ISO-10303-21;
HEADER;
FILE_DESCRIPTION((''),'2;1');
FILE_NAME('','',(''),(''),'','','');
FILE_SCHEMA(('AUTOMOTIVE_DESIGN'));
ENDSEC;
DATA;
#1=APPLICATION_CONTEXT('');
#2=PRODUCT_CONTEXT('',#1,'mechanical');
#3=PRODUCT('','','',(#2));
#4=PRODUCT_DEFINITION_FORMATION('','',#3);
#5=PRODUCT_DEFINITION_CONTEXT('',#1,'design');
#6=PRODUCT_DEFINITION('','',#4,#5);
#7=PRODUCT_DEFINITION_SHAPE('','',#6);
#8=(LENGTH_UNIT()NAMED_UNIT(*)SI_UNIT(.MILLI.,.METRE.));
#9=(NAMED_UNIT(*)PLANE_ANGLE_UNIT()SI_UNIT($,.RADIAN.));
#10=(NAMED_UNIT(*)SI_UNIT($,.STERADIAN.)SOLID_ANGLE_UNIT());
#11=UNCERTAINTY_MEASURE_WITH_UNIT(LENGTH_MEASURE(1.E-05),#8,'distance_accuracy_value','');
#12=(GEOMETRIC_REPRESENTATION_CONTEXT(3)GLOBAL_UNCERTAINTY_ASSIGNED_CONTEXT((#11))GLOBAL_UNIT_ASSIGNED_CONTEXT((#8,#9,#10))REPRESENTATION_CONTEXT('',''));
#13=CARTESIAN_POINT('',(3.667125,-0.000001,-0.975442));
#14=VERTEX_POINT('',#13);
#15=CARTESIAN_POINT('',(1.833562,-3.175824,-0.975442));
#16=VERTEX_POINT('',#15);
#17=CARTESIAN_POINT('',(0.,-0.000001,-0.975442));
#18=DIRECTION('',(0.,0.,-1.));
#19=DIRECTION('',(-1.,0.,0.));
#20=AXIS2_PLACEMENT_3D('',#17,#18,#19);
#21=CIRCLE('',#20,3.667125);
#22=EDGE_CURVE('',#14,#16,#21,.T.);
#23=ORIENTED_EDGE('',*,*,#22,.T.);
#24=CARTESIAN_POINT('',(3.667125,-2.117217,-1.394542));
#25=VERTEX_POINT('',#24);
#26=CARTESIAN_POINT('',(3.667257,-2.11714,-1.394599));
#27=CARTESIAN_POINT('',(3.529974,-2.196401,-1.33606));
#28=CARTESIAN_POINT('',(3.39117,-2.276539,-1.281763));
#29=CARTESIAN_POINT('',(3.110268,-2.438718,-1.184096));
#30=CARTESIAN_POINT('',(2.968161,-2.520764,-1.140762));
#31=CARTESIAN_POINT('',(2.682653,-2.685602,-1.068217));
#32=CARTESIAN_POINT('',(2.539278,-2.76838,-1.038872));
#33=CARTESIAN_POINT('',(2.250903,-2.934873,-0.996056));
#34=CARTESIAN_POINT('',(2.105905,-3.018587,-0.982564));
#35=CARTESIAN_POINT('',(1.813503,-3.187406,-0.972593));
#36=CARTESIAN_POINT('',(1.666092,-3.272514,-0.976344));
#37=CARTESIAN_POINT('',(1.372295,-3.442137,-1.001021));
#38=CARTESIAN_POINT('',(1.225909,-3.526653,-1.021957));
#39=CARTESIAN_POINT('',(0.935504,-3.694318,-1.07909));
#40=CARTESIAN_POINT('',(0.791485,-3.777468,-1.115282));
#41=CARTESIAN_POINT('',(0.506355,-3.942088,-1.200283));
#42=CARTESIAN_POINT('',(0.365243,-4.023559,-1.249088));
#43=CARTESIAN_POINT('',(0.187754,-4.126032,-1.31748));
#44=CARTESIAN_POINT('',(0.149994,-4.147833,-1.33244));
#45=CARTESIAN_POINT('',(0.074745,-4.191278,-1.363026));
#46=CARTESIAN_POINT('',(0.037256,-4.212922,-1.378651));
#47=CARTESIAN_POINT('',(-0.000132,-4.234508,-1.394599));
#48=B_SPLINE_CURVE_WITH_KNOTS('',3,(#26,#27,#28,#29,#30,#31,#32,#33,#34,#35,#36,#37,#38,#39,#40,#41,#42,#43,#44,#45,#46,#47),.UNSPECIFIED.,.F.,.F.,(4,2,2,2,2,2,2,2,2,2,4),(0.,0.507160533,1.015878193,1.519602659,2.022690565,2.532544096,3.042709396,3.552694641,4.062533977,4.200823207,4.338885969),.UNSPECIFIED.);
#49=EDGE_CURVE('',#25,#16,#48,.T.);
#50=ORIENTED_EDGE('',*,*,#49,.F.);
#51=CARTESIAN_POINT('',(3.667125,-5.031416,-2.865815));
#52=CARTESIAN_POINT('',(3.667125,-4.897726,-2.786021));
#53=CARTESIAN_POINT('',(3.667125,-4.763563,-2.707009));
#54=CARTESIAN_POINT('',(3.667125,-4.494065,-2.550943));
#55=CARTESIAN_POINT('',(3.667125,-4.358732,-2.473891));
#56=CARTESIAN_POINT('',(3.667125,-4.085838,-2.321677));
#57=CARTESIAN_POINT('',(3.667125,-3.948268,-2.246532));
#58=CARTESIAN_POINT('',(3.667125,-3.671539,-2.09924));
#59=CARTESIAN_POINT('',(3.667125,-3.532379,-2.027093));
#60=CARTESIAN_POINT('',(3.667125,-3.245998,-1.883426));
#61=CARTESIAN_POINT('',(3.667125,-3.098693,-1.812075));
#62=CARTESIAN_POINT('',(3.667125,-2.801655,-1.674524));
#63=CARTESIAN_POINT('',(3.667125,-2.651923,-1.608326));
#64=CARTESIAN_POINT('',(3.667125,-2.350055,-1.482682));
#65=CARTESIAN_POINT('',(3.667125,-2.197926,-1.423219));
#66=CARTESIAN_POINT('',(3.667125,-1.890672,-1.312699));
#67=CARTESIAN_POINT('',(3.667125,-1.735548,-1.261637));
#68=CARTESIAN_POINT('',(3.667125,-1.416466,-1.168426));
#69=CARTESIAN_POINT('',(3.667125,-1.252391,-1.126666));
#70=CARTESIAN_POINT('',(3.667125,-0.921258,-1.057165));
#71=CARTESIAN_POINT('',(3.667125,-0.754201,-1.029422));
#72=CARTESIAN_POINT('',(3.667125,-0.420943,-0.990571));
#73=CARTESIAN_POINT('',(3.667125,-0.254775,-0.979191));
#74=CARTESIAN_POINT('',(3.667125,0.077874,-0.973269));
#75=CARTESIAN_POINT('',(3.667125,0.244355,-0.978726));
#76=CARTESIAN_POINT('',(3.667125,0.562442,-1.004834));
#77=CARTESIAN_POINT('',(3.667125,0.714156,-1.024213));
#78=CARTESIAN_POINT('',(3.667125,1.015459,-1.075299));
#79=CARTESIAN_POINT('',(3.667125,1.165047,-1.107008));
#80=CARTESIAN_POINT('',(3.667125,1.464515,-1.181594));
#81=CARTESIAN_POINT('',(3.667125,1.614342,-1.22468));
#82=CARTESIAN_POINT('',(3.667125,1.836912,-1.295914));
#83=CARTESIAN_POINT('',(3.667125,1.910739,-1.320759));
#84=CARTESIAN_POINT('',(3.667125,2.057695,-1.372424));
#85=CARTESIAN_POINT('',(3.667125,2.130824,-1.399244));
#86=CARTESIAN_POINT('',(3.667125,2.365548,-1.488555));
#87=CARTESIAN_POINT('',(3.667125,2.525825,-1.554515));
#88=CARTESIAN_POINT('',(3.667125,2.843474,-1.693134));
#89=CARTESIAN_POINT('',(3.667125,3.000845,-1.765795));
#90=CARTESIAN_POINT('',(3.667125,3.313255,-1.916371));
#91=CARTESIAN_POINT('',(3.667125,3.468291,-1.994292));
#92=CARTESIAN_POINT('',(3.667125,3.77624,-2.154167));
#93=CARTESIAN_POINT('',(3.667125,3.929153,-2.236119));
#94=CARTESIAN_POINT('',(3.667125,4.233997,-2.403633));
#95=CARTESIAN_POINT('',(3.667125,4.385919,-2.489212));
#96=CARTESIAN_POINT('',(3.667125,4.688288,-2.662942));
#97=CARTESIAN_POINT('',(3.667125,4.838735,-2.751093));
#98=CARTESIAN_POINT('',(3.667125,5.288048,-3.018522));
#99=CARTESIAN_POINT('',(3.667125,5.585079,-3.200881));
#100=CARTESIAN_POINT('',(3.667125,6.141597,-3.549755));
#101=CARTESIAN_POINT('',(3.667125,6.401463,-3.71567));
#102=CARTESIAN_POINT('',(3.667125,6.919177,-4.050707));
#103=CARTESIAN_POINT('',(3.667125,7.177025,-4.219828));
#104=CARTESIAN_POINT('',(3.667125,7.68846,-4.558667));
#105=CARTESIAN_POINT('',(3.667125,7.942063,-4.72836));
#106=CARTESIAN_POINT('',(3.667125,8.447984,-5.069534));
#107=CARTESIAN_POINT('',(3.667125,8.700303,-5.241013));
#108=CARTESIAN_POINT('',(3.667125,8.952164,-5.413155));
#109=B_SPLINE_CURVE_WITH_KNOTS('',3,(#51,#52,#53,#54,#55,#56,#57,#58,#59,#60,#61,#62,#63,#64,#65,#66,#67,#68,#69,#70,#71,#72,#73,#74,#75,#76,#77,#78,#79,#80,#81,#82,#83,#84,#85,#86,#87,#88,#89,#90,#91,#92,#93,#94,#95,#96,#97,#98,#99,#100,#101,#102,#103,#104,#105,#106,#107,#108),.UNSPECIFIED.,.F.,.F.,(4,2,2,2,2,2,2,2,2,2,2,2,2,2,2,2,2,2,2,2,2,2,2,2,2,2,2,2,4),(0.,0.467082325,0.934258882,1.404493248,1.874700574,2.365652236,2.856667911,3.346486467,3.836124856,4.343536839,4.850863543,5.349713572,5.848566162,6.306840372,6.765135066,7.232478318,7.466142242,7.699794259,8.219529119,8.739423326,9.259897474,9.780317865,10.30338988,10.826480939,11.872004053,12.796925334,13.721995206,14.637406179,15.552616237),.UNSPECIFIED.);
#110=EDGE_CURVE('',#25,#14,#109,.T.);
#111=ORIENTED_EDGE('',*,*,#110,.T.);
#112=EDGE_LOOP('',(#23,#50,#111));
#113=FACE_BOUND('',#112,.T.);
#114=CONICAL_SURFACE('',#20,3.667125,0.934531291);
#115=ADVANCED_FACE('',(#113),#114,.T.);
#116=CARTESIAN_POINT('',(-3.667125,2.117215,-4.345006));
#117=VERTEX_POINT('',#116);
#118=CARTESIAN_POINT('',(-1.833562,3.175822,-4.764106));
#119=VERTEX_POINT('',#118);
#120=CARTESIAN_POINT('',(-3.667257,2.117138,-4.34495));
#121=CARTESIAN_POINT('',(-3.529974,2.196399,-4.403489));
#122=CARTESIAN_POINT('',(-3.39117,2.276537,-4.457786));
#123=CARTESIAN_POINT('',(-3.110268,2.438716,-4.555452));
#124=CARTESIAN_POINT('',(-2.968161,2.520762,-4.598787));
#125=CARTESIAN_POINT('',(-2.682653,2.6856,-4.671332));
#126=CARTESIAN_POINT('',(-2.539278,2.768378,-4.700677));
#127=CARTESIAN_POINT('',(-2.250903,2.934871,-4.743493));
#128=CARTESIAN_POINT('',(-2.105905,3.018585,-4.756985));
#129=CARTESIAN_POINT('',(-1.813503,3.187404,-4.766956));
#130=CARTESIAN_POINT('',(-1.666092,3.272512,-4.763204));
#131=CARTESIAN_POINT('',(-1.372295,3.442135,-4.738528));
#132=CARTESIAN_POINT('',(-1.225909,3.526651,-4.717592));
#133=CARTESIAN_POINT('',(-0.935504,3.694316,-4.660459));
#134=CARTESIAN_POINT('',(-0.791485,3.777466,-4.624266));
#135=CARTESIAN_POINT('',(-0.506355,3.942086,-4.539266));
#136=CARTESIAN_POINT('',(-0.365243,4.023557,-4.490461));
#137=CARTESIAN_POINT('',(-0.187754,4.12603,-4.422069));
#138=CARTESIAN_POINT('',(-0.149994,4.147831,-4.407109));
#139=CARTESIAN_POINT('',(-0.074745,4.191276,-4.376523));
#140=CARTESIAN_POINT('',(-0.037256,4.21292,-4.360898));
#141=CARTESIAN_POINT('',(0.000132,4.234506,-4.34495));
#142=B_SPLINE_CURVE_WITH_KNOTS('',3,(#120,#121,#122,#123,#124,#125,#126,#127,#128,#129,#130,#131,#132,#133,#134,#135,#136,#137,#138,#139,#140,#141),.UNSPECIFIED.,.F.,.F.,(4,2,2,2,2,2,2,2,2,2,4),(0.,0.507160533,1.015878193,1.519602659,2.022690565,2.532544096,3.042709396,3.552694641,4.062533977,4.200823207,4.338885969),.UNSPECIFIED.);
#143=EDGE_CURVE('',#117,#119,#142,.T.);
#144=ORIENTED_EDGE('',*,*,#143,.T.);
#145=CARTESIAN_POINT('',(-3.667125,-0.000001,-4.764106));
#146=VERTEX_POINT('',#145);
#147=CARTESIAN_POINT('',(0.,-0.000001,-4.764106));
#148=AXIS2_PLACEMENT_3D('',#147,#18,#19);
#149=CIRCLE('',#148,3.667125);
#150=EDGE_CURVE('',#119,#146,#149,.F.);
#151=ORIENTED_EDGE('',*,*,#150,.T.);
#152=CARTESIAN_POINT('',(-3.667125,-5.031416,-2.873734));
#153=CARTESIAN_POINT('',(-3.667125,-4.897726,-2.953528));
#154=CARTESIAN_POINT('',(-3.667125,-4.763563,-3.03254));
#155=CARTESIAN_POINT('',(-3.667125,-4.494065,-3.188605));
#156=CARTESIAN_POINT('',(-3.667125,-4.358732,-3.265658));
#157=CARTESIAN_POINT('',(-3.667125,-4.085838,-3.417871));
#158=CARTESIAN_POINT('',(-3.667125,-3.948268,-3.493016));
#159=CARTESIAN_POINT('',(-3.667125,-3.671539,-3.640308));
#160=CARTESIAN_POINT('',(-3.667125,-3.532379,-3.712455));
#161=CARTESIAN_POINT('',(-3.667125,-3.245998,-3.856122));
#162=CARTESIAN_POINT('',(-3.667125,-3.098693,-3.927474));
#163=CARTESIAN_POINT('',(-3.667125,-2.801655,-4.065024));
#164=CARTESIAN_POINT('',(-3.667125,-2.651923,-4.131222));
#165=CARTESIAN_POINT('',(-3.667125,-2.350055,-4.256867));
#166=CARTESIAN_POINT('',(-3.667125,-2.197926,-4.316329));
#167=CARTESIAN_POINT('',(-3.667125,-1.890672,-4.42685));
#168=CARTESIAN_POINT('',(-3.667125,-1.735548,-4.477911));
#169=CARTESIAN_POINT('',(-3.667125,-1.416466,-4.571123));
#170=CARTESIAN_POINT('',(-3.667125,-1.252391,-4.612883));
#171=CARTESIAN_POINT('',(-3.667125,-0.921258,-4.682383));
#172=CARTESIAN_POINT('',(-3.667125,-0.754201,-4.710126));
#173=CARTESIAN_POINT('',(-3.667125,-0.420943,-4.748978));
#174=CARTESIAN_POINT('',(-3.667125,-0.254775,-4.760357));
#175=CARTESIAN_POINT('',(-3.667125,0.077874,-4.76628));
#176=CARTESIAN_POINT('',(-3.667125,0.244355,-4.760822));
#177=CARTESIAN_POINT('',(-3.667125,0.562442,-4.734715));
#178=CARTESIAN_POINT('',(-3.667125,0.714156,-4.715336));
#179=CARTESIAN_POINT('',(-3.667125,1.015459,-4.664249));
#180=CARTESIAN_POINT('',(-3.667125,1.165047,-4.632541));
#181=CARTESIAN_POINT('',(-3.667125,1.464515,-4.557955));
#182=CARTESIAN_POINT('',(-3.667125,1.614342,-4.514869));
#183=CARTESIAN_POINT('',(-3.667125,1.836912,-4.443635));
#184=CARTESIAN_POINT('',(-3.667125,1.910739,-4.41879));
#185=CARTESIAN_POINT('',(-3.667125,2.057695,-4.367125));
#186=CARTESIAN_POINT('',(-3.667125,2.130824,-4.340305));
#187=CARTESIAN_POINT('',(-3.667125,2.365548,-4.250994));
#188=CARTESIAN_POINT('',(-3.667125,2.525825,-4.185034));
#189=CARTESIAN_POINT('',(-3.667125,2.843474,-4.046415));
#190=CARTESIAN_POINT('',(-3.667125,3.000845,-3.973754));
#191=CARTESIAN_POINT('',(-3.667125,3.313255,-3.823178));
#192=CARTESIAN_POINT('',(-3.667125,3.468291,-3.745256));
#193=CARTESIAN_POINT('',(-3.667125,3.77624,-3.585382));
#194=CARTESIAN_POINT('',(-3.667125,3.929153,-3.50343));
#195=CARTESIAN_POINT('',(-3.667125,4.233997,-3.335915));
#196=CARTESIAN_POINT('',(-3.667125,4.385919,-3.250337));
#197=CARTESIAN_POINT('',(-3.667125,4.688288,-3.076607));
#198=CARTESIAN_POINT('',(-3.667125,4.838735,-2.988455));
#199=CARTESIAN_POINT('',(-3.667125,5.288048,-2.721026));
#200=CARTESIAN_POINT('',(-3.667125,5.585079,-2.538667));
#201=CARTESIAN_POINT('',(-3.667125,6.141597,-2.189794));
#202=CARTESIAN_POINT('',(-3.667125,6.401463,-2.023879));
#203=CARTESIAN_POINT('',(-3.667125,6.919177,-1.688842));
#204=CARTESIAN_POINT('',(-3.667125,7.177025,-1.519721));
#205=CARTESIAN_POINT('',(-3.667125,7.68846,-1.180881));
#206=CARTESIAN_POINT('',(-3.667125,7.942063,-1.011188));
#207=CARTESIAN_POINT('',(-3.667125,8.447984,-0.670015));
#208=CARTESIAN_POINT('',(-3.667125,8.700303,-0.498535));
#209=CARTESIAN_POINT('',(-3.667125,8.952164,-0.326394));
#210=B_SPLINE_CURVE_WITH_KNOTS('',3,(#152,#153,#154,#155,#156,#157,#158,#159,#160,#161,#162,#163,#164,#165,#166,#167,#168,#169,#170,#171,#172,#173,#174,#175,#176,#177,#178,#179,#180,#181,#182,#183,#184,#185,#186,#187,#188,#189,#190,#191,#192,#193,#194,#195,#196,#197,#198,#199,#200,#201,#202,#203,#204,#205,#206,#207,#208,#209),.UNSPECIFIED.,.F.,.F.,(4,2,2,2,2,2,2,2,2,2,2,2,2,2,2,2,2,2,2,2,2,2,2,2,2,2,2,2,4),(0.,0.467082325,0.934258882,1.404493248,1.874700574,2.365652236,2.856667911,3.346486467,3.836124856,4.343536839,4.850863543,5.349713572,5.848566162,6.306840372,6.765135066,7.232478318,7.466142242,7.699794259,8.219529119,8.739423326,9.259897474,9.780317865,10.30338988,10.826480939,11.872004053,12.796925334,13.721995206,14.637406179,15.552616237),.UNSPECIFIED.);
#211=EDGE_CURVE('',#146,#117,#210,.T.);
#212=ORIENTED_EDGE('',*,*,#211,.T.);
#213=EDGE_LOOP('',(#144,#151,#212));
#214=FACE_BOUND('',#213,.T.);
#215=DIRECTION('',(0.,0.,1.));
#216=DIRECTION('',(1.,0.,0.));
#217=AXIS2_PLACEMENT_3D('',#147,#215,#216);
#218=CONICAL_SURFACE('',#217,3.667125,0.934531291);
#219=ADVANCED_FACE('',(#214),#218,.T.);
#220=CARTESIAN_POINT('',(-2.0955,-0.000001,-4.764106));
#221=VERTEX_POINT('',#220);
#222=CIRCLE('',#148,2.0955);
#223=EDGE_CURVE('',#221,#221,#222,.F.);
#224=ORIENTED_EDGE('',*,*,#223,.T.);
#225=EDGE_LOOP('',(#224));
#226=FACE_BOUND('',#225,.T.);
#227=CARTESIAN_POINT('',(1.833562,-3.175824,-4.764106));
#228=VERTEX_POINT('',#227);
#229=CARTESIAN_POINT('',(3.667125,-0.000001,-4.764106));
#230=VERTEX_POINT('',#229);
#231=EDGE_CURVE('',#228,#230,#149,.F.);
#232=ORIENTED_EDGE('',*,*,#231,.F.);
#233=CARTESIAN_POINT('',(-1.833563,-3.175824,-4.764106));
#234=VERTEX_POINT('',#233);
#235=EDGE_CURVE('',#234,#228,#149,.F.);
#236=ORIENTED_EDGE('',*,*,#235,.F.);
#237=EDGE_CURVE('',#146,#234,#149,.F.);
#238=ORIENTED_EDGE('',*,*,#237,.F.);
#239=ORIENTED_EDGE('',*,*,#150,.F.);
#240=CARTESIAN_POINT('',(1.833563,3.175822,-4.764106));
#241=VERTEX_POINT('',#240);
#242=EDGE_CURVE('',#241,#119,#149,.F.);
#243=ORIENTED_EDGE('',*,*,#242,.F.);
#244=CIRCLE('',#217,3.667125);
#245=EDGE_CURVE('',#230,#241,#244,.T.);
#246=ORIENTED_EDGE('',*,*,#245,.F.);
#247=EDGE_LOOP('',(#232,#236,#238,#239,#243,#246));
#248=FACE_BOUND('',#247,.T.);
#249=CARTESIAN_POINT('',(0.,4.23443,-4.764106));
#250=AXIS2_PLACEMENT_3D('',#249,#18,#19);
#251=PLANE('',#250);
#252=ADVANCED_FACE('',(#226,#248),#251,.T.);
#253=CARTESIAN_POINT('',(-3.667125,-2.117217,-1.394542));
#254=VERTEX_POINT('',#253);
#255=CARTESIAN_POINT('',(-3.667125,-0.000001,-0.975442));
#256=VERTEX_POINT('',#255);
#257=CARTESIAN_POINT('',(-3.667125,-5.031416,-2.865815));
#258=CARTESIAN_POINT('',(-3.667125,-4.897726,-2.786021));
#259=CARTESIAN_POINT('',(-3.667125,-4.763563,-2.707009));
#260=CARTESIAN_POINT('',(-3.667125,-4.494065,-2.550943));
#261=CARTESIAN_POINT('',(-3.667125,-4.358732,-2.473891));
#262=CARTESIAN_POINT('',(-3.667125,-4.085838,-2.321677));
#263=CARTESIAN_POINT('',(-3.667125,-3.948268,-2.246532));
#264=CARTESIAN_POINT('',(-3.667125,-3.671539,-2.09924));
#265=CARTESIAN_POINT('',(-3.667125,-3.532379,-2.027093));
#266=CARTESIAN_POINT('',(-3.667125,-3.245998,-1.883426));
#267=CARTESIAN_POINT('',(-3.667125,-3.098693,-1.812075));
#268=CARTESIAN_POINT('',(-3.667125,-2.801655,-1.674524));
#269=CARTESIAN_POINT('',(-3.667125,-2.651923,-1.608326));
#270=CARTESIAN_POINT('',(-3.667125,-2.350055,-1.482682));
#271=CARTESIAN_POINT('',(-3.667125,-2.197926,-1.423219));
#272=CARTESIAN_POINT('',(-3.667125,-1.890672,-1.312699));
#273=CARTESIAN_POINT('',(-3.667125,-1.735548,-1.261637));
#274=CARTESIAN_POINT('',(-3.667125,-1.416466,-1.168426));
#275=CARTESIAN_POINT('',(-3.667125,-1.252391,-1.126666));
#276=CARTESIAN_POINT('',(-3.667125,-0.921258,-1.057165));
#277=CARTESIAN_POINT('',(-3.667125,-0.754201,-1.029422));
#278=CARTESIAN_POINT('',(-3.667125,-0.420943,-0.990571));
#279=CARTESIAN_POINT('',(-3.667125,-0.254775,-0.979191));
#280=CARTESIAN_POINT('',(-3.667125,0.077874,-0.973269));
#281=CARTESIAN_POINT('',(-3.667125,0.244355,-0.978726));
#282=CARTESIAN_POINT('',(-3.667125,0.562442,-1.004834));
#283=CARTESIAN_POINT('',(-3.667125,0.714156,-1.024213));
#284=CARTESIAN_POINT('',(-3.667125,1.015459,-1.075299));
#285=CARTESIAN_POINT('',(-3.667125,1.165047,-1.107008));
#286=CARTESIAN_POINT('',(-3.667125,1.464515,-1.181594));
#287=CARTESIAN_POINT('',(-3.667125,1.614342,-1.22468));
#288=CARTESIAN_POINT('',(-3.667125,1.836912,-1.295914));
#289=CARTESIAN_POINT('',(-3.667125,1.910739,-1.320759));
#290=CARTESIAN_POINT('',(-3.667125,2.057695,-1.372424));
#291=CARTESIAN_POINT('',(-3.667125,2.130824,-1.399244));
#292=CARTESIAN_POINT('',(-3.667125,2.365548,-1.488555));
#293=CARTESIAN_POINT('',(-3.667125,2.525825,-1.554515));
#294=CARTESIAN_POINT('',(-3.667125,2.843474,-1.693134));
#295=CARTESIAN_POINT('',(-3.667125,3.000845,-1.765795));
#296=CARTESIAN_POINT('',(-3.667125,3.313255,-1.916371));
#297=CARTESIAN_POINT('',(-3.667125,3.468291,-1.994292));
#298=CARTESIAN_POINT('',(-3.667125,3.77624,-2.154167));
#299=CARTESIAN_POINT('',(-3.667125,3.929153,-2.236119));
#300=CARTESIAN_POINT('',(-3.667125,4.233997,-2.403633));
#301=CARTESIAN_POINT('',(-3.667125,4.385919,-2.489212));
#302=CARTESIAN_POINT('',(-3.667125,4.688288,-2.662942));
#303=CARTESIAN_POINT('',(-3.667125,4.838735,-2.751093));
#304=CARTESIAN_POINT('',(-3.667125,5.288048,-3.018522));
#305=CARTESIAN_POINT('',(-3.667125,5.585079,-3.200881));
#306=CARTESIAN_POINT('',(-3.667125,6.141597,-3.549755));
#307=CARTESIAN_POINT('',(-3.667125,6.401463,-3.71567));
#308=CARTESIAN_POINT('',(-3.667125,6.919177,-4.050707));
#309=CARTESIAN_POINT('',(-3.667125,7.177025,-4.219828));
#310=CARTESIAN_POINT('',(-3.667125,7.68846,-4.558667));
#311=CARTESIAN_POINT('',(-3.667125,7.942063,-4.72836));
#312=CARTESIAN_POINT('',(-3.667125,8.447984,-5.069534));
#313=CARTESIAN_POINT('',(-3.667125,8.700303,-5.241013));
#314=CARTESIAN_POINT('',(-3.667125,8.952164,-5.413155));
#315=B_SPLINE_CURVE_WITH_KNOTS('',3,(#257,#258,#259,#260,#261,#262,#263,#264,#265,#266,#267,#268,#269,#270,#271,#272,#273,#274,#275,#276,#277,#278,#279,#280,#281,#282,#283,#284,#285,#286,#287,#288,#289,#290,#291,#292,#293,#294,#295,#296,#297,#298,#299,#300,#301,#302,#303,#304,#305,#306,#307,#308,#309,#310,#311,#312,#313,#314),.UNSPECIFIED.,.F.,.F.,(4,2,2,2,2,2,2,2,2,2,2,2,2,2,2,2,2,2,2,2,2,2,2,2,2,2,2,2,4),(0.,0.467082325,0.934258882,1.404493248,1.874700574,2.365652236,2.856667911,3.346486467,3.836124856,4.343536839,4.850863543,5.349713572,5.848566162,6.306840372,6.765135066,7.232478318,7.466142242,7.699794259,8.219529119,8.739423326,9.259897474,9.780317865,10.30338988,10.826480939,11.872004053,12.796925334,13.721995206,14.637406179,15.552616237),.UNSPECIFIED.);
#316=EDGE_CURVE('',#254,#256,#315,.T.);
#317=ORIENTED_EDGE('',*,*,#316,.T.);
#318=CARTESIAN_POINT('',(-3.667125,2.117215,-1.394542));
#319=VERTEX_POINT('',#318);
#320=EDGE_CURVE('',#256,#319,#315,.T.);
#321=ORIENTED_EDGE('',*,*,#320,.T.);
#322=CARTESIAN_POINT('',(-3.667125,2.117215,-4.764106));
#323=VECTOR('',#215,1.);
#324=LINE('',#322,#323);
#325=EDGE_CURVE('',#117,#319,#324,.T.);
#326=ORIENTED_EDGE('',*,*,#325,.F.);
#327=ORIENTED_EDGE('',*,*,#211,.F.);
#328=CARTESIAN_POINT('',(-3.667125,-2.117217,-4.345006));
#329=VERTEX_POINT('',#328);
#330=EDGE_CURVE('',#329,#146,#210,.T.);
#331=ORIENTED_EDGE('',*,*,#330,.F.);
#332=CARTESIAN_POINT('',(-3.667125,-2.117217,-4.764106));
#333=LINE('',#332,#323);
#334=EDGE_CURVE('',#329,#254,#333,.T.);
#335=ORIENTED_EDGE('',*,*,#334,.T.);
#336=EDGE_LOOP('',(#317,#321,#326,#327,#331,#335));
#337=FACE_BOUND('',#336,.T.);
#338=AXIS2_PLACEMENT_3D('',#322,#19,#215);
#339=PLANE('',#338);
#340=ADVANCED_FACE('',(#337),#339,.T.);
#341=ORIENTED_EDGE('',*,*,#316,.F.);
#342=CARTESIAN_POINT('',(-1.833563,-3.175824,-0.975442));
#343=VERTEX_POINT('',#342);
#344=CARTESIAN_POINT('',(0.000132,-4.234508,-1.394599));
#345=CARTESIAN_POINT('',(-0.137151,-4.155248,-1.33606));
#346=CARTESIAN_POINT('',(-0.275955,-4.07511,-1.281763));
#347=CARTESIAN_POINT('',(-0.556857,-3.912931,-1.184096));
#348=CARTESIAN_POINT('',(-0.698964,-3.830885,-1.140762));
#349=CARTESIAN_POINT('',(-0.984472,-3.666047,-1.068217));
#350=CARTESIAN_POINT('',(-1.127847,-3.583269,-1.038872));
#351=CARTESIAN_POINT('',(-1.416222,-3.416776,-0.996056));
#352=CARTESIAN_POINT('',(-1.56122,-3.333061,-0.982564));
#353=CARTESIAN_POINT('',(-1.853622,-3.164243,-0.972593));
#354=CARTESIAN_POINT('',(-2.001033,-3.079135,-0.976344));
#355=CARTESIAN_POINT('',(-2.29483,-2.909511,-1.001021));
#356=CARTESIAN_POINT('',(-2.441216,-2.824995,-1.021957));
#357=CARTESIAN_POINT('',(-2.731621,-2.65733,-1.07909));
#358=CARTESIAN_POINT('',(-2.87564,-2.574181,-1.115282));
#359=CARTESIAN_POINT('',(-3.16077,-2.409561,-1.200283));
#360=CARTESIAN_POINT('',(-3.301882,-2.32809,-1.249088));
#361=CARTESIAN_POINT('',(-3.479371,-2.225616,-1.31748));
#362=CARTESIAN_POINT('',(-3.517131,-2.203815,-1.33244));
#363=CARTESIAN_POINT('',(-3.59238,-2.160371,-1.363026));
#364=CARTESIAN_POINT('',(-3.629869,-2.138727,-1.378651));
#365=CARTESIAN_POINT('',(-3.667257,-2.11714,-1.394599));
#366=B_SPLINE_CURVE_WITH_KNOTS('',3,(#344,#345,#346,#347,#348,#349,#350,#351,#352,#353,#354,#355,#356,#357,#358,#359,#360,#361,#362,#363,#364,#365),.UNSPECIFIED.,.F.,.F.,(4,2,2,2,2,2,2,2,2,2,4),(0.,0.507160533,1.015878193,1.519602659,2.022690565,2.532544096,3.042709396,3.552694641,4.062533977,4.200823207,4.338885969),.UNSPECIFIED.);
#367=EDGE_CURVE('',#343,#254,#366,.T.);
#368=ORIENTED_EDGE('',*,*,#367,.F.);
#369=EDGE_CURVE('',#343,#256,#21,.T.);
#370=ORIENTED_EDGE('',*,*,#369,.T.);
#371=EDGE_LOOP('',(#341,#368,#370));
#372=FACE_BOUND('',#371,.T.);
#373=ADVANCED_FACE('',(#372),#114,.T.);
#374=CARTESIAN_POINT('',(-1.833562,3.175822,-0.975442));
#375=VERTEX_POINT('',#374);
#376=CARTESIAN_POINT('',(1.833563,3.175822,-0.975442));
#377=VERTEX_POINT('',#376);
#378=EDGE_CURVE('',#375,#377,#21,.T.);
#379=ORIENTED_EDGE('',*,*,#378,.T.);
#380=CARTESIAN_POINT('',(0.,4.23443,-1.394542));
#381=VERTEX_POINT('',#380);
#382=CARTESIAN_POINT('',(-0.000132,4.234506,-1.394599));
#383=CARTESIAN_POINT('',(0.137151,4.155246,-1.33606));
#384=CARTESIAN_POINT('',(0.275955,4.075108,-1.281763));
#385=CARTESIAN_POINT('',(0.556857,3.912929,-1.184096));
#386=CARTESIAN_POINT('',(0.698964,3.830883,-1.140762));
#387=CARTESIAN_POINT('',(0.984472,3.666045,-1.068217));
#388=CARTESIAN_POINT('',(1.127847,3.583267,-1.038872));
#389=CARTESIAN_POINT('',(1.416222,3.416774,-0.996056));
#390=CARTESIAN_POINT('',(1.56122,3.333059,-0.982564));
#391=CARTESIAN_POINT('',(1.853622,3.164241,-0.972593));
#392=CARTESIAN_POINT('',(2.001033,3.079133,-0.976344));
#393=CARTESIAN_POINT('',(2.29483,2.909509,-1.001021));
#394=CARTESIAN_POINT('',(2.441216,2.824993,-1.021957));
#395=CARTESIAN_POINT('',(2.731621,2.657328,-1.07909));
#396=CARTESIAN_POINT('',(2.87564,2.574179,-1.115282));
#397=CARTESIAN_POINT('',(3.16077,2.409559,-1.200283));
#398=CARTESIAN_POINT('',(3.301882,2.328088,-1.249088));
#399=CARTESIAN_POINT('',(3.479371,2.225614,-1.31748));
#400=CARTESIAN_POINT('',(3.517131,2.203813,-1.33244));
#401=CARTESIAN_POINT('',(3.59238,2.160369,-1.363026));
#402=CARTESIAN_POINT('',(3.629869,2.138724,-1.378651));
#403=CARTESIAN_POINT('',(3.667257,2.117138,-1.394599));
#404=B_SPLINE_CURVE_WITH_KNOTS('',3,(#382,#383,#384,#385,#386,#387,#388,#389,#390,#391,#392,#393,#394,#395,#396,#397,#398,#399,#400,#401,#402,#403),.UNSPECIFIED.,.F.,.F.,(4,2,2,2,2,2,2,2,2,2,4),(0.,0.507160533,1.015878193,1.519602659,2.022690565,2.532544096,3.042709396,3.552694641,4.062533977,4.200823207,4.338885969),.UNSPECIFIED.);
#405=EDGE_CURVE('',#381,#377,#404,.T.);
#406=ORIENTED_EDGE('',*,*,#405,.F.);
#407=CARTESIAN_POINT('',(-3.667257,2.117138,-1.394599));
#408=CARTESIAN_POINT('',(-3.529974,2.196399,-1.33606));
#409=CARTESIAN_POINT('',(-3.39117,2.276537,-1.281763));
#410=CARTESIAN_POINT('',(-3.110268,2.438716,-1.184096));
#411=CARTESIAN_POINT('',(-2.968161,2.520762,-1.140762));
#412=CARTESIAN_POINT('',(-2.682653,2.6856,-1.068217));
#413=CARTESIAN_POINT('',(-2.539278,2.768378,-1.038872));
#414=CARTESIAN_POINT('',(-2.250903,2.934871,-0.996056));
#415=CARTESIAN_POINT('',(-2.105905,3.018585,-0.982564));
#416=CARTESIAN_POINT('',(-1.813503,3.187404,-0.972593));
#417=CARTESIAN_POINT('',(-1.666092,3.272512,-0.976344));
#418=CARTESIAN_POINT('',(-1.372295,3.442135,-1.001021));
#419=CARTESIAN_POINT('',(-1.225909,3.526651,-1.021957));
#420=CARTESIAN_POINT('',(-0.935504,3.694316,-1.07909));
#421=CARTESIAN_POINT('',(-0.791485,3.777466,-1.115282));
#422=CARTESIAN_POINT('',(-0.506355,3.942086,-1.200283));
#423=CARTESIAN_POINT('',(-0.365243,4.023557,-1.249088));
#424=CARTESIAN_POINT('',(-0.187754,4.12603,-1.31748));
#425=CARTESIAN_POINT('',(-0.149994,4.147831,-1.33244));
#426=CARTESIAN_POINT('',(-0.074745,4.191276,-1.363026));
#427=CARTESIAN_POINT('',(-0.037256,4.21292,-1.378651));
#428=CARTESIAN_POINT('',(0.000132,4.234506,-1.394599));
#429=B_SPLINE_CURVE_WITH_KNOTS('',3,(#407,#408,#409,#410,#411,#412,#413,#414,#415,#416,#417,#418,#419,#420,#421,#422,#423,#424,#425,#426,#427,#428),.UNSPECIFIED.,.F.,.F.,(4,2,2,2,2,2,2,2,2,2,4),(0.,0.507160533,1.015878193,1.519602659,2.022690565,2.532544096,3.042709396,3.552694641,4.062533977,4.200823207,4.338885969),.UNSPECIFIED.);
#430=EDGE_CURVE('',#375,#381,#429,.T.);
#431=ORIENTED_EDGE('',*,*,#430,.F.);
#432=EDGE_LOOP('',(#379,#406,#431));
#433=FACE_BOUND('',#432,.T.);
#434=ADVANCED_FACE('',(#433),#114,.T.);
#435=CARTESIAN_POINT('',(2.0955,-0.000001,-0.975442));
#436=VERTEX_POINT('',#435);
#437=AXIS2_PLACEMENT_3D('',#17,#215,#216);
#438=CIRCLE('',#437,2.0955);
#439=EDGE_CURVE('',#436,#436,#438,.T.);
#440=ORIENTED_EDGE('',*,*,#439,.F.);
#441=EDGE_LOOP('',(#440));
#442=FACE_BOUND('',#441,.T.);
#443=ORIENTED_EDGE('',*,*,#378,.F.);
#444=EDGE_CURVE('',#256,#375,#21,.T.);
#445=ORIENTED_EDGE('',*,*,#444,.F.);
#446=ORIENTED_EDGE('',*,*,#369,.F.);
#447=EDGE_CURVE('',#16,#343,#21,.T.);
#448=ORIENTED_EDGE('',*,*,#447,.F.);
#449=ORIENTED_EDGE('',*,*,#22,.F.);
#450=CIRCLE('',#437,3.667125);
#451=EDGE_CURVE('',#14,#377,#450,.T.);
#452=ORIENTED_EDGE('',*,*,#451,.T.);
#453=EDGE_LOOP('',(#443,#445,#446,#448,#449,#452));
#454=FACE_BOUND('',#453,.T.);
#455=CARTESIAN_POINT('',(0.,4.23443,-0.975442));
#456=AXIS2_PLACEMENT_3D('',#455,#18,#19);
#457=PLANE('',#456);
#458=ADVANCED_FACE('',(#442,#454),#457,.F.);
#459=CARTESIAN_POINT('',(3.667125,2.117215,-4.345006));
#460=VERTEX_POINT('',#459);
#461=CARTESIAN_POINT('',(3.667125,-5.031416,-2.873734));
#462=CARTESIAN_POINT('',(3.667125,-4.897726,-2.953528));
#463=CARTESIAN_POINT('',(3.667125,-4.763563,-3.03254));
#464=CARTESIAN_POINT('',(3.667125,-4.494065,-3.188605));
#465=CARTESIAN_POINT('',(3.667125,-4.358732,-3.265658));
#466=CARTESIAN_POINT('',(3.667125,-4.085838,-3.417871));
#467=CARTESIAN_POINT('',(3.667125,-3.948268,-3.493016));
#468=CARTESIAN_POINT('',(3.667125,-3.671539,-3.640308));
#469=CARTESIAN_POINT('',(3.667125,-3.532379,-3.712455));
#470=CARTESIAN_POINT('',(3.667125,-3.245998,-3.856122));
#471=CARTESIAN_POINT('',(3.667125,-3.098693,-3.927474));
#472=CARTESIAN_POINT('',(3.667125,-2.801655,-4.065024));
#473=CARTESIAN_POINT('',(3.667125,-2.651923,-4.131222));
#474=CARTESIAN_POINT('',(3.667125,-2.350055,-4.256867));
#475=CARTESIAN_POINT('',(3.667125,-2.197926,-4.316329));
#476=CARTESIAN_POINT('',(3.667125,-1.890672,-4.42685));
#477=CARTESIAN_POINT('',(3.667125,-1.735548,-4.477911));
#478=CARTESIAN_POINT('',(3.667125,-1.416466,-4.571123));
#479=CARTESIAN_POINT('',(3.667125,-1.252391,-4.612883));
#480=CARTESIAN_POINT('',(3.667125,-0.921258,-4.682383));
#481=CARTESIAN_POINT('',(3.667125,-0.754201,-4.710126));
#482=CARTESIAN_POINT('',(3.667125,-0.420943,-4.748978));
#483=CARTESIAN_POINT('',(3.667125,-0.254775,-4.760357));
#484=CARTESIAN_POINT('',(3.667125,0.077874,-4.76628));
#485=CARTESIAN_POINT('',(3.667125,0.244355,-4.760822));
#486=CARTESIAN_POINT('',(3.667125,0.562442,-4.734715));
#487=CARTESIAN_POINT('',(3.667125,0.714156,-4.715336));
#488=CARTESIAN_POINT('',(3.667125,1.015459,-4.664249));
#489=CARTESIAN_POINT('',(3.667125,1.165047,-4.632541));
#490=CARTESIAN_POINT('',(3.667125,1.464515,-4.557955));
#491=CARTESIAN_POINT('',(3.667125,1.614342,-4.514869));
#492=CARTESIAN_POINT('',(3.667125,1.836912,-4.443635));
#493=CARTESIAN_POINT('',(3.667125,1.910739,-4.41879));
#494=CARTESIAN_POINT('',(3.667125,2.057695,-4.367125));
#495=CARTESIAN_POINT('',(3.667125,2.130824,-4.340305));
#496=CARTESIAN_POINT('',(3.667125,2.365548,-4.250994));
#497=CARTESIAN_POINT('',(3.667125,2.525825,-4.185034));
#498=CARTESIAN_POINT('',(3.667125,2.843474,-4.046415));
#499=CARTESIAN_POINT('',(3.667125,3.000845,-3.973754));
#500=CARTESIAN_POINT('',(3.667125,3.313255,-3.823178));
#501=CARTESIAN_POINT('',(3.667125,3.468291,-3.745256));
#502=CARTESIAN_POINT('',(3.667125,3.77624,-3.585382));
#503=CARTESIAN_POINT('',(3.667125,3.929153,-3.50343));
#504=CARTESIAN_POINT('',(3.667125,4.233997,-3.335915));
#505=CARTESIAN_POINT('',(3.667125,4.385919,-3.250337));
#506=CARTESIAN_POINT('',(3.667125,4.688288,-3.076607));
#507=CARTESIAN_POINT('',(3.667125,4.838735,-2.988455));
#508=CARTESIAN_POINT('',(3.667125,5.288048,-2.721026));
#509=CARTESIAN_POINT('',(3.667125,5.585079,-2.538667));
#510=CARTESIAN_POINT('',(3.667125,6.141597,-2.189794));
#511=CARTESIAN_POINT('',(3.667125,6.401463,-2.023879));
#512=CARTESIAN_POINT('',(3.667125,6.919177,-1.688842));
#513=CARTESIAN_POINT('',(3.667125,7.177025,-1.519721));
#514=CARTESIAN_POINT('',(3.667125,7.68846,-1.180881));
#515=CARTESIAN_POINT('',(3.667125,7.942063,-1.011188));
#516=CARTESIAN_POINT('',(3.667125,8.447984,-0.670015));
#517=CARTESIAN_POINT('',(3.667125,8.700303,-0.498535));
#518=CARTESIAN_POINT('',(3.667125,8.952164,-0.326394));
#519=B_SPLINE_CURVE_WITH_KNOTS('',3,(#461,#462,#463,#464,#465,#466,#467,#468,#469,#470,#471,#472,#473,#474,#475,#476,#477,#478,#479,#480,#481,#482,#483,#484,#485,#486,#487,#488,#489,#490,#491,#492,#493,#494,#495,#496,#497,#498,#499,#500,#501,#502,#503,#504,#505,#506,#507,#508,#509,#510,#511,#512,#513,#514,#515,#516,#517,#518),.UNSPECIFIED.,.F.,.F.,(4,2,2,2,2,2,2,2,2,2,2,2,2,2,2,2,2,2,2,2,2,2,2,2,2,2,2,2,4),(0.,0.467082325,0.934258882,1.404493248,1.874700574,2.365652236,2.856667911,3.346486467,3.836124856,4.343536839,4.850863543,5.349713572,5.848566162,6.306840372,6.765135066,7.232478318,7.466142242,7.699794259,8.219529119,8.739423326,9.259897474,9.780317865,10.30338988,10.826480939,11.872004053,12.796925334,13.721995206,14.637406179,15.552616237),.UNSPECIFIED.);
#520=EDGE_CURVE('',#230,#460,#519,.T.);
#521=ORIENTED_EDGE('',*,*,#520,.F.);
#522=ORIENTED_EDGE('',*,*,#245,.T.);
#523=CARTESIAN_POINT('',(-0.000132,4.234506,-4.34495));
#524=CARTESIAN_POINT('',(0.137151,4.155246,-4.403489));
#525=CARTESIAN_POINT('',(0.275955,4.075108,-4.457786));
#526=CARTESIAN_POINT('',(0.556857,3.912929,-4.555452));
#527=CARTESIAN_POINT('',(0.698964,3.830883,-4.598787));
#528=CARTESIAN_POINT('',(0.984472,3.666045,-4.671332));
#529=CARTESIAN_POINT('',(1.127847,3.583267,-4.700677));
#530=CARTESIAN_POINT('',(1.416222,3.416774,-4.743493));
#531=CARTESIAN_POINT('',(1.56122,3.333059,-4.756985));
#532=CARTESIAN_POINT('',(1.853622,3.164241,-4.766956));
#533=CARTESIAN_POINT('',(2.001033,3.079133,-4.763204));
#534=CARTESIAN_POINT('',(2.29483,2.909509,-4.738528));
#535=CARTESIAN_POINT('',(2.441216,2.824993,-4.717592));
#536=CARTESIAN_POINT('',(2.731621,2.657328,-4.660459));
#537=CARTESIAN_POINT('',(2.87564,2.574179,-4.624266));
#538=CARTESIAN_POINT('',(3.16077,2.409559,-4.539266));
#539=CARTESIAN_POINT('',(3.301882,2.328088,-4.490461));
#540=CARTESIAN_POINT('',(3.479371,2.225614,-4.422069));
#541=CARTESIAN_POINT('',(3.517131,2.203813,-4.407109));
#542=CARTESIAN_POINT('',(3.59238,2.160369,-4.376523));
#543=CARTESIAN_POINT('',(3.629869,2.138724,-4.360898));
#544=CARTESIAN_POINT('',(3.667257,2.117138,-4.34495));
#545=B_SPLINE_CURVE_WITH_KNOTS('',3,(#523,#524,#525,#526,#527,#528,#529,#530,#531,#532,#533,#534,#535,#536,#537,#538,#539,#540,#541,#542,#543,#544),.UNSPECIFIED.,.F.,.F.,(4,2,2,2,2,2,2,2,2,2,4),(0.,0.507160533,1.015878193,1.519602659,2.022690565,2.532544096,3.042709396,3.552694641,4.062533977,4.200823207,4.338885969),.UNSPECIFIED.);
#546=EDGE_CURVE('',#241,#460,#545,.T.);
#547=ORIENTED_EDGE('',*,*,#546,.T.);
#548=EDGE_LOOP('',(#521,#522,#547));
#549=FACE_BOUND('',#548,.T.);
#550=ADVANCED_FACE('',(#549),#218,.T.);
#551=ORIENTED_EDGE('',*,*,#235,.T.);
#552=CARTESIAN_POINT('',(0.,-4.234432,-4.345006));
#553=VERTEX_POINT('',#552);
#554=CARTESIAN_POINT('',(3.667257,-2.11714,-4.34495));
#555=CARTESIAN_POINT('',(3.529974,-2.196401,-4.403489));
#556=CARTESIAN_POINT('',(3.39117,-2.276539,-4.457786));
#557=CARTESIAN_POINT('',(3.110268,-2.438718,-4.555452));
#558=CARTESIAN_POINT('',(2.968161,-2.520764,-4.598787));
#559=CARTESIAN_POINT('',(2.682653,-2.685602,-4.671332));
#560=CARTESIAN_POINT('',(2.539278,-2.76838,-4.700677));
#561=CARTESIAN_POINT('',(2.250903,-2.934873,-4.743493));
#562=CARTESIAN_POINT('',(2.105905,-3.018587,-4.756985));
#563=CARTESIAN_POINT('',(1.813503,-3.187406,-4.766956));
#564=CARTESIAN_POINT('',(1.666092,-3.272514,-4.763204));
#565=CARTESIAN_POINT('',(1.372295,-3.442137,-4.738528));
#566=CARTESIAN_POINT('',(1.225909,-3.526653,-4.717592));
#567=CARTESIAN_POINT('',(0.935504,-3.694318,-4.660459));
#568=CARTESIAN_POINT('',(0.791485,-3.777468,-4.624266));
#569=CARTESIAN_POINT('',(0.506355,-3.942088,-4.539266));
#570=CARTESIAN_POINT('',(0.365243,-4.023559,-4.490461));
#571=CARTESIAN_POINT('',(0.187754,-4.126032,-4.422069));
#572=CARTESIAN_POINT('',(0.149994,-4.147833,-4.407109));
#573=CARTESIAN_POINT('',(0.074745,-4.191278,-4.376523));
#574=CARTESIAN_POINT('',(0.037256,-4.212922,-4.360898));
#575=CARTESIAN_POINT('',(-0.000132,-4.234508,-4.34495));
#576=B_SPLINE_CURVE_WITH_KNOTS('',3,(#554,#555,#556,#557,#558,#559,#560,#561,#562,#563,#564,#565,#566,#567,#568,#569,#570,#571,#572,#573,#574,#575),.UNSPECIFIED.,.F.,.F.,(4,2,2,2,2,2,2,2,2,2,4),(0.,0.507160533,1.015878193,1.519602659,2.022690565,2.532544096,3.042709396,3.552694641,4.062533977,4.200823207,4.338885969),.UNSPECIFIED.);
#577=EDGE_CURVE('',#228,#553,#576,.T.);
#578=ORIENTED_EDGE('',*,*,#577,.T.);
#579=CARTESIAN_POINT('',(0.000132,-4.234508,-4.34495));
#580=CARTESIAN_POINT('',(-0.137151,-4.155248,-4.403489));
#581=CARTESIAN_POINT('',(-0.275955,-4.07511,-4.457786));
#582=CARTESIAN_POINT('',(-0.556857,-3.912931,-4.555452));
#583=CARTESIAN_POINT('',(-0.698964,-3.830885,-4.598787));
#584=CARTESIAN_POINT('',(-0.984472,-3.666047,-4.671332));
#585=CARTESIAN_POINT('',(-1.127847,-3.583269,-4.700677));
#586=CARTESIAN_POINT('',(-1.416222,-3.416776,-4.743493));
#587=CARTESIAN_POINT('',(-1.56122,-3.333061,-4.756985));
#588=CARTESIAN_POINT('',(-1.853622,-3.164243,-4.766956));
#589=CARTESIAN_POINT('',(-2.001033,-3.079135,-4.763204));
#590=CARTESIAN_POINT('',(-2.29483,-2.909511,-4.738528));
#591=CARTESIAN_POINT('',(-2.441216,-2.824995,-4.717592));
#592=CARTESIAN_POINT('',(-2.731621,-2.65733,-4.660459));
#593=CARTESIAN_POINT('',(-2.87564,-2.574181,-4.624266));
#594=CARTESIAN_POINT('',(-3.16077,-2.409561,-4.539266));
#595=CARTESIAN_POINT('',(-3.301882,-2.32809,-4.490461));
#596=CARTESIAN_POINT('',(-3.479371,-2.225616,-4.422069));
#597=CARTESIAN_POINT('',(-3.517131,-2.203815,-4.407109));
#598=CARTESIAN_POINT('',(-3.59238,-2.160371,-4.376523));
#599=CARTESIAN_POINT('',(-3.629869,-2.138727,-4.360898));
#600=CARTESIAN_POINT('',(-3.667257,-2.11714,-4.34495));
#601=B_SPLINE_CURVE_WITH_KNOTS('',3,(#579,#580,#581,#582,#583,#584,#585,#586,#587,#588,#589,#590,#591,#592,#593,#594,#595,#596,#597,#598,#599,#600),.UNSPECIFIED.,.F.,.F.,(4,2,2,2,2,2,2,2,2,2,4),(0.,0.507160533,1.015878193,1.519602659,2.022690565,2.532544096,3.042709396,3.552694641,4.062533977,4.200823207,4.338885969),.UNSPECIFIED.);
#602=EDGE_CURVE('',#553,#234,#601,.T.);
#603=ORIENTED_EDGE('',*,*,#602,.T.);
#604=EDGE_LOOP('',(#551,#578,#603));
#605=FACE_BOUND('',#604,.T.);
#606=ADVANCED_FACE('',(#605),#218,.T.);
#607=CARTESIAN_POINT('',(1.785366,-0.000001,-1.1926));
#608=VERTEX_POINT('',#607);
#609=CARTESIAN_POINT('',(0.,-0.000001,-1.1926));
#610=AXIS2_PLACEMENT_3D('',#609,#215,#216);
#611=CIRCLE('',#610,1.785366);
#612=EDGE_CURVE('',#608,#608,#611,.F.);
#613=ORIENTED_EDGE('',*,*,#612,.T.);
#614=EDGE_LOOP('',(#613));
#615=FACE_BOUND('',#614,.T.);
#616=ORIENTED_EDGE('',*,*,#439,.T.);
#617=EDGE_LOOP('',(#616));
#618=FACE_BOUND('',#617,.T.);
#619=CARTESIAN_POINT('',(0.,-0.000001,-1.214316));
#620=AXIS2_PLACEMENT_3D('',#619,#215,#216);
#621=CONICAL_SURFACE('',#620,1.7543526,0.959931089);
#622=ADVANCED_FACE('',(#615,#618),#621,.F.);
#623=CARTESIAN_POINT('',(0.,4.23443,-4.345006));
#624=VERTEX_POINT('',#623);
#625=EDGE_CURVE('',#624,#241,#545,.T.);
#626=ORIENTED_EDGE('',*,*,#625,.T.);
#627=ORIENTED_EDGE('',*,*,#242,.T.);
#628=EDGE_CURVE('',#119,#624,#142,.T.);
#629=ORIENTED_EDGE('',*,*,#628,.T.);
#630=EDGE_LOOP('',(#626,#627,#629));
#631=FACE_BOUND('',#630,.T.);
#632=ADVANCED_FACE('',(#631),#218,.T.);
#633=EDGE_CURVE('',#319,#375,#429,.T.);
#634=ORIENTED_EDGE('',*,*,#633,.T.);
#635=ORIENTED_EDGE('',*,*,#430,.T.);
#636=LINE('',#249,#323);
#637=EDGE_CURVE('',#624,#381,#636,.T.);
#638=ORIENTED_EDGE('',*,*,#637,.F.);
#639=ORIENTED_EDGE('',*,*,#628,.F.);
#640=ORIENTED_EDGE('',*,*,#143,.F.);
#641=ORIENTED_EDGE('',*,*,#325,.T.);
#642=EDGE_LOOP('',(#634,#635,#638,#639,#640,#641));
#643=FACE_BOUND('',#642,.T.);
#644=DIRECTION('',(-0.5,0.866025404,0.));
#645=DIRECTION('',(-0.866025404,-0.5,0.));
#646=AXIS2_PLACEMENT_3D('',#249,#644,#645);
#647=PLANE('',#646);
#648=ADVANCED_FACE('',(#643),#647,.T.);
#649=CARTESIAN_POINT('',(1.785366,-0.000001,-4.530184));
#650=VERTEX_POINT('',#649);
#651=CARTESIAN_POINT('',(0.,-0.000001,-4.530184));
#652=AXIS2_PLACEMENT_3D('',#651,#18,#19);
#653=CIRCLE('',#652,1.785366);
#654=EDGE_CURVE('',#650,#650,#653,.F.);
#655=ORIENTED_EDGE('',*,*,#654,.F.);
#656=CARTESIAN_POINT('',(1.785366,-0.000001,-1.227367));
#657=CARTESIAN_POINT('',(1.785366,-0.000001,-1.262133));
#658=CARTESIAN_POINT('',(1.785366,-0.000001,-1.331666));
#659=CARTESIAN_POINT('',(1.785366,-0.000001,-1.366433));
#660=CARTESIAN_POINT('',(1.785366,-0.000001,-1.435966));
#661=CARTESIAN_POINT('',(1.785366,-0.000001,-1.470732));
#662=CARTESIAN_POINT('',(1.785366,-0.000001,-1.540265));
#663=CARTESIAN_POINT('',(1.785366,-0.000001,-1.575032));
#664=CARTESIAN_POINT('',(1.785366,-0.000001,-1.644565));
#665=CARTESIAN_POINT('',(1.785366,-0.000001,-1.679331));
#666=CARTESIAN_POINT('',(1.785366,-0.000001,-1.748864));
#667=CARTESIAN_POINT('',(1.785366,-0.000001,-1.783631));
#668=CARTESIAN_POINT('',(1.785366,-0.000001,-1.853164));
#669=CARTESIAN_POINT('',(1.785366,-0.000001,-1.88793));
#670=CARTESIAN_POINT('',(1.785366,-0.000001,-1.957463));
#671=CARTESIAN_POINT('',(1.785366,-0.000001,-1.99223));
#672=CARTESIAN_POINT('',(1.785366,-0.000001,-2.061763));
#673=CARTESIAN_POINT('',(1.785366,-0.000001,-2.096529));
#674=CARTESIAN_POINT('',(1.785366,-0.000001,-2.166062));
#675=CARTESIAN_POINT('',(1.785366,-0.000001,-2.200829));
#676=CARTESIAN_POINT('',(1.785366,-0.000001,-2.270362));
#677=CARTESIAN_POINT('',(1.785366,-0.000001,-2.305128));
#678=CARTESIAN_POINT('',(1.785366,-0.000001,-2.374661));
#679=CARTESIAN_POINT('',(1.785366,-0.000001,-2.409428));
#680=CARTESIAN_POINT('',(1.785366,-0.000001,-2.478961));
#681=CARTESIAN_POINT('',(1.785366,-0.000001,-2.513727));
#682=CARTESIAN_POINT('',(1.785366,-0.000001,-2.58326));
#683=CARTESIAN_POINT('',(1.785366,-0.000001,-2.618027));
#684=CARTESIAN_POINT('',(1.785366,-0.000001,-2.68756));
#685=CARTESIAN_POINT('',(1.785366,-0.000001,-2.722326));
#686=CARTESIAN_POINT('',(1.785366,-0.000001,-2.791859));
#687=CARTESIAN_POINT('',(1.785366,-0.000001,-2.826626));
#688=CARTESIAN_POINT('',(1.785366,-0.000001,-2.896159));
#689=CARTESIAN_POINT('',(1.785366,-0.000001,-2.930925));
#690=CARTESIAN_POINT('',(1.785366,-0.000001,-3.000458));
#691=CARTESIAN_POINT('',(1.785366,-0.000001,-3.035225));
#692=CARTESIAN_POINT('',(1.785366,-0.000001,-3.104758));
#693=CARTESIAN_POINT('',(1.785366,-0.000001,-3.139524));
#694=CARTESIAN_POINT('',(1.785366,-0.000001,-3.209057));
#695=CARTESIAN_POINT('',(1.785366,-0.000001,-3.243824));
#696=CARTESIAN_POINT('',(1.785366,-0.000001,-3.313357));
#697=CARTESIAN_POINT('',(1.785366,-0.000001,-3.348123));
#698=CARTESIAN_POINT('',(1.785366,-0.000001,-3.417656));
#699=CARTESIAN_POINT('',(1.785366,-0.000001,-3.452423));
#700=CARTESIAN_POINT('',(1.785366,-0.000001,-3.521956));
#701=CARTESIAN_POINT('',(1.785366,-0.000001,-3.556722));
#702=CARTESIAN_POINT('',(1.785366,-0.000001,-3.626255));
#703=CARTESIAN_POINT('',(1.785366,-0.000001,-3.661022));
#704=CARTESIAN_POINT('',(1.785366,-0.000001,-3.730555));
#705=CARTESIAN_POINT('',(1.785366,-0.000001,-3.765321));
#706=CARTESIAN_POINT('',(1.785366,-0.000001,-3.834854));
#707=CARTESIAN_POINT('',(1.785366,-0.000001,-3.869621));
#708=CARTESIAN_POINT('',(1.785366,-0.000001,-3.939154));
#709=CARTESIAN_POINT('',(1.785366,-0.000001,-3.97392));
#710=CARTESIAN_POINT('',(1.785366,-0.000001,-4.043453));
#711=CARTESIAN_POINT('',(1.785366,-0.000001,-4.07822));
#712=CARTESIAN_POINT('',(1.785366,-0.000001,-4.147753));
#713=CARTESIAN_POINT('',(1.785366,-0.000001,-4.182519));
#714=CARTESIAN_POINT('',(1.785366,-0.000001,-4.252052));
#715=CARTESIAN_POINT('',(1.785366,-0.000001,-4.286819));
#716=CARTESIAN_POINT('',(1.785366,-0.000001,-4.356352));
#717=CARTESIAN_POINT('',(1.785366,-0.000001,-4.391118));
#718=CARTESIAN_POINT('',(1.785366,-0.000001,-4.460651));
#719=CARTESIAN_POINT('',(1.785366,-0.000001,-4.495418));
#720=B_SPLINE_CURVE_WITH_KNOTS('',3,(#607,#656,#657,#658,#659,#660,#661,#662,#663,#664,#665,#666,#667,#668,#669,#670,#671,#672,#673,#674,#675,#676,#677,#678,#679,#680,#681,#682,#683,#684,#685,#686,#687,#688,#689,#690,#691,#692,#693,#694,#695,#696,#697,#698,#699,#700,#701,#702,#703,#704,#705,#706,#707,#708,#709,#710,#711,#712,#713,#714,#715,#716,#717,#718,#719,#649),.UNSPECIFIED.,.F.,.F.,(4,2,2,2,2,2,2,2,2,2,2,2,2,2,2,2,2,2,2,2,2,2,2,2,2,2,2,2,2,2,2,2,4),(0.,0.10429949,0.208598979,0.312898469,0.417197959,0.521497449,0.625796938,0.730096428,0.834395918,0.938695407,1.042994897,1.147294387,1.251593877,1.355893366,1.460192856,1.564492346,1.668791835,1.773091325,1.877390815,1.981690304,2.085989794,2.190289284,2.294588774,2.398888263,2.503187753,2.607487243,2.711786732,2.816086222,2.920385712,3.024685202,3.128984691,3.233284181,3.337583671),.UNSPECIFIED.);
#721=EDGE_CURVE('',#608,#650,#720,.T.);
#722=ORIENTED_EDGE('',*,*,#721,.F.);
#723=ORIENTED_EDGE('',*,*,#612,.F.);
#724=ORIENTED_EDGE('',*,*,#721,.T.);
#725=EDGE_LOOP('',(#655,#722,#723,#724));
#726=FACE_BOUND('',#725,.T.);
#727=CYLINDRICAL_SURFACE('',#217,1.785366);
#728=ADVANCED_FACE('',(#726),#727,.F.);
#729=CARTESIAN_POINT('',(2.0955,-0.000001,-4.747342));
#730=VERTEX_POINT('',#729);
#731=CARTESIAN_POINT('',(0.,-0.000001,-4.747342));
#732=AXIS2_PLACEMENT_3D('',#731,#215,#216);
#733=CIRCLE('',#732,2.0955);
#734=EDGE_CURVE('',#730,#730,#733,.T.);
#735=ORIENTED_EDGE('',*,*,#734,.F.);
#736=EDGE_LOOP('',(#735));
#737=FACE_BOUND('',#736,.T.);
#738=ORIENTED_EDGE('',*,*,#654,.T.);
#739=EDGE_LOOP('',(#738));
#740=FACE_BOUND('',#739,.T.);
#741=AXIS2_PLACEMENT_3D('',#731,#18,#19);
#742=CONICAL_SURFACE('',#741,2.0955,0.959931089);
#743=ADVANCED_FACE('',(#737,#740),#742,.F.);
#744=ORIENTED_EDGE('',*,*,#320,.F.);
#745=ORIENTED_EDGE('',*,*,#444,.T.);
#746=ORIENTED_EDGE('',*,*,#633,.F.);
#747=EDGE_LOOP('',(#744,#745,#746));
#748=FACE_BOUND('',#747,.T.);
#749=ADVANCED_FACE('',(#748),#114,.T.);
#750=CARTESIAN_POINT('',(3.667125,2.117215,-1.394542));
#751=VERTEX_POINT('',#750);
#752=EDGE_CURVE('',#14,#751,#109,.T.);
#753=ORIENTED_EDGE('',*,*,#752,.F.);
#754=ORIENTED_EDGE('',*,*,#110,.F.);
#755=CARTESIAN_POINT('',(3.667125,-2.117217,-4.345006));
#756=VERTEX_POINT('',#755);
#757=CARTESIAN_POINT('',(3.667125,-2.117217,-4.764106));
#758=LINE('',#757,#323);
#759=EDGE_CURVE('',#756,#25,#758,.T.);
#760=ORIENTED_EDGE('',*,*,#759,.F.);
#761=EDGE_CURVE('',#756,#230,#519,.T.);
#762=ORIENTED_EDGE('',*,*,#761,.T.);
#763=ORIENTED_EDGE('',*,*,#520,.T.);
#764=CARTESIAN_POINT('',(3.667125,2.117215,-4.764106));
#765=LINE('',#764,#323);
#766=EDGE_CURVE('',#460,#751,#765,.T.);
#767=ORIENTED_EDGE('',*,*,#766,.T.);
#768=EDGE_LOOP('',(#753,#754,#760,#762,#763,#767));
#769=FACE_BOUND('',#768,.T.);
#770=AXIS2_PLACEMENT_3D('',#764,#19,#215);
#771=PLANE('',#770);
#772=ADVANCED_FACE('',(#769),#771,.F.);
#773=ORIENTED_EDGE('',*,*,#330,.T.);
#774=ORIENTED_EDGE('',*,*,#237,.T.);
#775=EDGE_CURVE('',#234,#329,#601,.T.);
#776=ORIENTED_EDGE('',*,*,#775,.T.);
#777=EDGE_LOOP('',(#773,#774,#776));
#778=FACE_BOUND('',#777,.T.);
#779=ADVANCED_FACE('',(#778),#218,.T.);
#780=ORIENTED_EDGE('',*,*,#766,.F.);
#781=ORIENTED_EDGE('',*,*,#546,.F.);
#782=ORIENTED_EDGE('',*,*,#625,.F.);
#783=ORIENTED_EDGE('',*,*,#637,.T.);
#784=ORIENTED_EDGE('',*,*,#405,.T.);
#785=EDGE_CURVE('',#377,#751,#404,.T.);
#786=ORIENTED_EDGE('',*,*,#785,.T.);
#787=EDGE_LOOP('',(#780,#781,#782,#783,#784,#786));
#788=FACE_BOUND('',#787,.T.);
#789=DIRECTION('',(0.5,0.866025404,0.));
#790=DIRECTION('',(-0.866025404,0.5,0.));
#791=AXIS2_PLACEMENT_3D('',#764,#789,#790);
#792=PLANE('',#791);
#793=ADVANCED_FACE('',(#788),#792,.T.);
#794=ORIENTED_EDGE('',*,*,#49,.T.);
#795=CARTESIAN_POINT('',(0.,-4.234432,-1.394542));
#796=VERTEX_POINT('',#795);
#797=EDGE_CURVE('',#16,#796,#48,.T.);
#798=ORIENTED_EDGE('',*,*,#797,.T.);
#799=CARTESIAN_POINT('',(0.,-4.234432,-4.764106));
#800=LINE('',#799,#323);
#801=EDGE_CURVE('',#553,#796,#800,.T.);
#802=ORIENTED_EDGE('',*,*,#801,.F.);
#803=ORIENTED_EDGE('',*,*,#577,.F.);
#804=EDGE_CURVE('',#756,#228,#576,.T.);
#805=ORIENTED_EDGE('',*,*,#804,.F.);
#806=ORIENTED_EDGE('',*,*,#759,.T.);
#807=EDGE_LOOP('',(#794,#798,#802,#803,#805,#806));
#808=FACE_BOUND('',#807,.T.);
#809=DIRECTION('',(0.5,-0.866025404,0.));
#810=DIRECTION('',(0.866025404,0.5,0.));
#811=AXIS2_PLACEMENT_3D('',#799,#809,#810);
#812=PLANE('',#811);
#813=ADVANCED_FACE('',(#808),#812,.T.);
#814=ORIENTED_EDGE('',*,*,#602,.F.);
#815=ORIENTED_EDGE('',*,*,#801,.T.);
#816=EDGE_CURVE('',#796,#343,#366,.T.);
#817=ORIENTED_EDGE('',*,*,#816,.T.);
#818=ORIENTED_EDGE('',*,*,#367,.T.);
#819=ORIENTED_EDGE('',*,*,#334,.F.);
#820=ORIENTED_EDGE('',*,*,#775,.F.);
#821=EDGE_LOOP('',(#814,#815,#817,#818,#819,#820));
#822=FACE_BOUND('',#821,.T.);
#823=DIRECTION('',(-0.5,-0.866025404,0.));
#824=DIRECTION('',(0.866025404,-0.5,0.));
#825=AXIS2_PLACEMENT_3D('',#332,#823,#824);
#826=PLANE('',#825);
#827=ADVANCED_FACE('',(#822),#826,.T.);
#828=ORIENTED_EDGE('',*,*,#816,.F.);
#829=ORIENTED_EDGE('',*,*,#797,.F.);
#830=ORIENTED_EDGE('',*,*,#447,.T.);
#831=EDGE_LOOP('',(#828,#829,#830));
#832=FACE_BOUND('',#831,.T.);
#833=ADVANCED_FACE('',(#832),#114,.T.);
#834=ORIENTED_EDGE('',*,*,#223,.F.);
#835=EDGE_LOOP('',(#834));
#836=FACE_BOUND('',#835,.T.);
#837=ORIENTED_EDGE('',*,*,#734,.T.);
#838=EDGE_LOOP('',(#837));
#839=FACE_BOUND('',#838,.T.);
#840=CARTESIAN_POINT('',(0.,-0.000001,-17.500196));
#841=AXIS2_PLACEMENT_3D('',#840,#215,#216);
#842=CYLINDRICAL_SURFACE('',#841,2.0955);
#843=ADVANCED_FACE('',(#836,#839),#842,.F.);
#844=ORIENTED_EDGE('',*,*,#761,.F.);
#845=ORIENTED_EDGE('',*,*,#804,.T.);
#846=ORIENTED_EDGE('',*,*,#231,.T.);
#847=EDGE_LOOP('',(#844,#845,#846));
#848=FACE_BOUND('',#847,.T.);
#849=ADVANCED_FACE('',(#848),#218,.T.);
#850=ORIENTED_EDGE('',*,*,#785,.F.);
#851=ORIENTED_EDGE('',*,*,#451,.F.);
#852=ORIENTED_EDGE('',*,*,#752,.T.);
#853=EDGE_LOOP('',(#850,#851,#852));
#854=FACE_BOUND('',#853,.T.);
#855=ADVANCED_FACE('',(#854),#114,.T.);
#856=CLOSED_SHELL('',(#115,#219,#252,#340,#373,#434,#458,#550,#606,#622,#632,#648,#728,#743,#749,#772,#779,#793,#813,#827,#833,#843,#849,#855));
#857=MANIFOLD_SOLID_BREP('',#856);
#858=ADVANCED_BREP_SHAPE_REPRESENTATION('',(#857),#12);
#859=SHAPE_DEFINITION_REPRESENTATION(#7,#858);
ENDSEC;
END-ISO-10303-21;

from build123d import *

# Parameters (mm, degrees)
BASENUT_START = -5.7404
BASENUTSKE_R  = 2.7051
BASENUT_DEPTH = 5.7404
SCALE1_SCALE  = 0.66


# Read off the part's stored shape, not the designer's step: ThreadSchematic
with BuildPart() as part:
    # BaseNutSke → BaseNut (new body)
    with BuildSketch(Plane.XY.offset(BASENUT_START)):
        Polygon((5.55625, 3.207902433), (5.55625, -3.207902433), (0, -6.415804866), (-5.55625, -3.207902433), (-5.55625, 3.207902433), (0, 6.415804866), align=None)
        Circle(BASENUTSKE_R, mode=Mode.SUBTRACT)
    extrude(amount=BASENUT_DEPTH)

    # Sketch5 (on Front Plane) → EndChamfer (revolve, cut)
    with BuildSketch(Plane.XY):
        Polygon((5.715, 3.175), (5.353069726, 2.65811), (5.7658, 2.65811), (5.7658, 3.175), align=None)
    revolve(axis=Axis((5.715, 3.175, 0), (-0.5735764363510442, -0.8191520442889932, 0)), mode=Mode.SUBTRACT)

    # Sketch3 → Double-Chamfer (revolve, cut)
    with BuildSketch(Plane(origin=(0, 0, 0), x_dir=(0, 0, -1), z_dir=(1, 0, 0))):
        Polygon((5.7404, 5.55625), (5.1054, 6.415804866), (5.1054, 19.115804866), (18.4404, 19.115804866), (18.4404, 5.55625), align=None)
        Polygon((0.635, 19.115804866), (-12.7, 19.115804866), (-12.7, 5.55625), (0, 5.55625), (0.635, 6.415804866), align=None)
    revolve(axis=Axis((0, 0, 0), (0, 0, -1)), mode=Mode.SUBTRACT)

    # ThreadSchematic outline → ThreadSchematic (revolve, cut)
    with BuildSketch(Plane.XZ):
        Polygon((2.7051, 0), (2.7051, -0.329027522), (3.175, 0), align=None)
        Polygon((3.175, -5.715), (2.7051, -5.385972478), (2.7051, -5.7404), (3.175, -5.7404), align=None)
    revolve(axis=Axis((0, 0, 0), (0, 0, 1)), mode=Mode.SUBTRACT)


with BuildPart() as part_1:
    # Scale1: scaled about (0, 0, -2.868948271)
    add(part.part.scale(SCALE1_SCALE).moved(Location((0, 0, -0.975442412))))


solid = part_1.part
